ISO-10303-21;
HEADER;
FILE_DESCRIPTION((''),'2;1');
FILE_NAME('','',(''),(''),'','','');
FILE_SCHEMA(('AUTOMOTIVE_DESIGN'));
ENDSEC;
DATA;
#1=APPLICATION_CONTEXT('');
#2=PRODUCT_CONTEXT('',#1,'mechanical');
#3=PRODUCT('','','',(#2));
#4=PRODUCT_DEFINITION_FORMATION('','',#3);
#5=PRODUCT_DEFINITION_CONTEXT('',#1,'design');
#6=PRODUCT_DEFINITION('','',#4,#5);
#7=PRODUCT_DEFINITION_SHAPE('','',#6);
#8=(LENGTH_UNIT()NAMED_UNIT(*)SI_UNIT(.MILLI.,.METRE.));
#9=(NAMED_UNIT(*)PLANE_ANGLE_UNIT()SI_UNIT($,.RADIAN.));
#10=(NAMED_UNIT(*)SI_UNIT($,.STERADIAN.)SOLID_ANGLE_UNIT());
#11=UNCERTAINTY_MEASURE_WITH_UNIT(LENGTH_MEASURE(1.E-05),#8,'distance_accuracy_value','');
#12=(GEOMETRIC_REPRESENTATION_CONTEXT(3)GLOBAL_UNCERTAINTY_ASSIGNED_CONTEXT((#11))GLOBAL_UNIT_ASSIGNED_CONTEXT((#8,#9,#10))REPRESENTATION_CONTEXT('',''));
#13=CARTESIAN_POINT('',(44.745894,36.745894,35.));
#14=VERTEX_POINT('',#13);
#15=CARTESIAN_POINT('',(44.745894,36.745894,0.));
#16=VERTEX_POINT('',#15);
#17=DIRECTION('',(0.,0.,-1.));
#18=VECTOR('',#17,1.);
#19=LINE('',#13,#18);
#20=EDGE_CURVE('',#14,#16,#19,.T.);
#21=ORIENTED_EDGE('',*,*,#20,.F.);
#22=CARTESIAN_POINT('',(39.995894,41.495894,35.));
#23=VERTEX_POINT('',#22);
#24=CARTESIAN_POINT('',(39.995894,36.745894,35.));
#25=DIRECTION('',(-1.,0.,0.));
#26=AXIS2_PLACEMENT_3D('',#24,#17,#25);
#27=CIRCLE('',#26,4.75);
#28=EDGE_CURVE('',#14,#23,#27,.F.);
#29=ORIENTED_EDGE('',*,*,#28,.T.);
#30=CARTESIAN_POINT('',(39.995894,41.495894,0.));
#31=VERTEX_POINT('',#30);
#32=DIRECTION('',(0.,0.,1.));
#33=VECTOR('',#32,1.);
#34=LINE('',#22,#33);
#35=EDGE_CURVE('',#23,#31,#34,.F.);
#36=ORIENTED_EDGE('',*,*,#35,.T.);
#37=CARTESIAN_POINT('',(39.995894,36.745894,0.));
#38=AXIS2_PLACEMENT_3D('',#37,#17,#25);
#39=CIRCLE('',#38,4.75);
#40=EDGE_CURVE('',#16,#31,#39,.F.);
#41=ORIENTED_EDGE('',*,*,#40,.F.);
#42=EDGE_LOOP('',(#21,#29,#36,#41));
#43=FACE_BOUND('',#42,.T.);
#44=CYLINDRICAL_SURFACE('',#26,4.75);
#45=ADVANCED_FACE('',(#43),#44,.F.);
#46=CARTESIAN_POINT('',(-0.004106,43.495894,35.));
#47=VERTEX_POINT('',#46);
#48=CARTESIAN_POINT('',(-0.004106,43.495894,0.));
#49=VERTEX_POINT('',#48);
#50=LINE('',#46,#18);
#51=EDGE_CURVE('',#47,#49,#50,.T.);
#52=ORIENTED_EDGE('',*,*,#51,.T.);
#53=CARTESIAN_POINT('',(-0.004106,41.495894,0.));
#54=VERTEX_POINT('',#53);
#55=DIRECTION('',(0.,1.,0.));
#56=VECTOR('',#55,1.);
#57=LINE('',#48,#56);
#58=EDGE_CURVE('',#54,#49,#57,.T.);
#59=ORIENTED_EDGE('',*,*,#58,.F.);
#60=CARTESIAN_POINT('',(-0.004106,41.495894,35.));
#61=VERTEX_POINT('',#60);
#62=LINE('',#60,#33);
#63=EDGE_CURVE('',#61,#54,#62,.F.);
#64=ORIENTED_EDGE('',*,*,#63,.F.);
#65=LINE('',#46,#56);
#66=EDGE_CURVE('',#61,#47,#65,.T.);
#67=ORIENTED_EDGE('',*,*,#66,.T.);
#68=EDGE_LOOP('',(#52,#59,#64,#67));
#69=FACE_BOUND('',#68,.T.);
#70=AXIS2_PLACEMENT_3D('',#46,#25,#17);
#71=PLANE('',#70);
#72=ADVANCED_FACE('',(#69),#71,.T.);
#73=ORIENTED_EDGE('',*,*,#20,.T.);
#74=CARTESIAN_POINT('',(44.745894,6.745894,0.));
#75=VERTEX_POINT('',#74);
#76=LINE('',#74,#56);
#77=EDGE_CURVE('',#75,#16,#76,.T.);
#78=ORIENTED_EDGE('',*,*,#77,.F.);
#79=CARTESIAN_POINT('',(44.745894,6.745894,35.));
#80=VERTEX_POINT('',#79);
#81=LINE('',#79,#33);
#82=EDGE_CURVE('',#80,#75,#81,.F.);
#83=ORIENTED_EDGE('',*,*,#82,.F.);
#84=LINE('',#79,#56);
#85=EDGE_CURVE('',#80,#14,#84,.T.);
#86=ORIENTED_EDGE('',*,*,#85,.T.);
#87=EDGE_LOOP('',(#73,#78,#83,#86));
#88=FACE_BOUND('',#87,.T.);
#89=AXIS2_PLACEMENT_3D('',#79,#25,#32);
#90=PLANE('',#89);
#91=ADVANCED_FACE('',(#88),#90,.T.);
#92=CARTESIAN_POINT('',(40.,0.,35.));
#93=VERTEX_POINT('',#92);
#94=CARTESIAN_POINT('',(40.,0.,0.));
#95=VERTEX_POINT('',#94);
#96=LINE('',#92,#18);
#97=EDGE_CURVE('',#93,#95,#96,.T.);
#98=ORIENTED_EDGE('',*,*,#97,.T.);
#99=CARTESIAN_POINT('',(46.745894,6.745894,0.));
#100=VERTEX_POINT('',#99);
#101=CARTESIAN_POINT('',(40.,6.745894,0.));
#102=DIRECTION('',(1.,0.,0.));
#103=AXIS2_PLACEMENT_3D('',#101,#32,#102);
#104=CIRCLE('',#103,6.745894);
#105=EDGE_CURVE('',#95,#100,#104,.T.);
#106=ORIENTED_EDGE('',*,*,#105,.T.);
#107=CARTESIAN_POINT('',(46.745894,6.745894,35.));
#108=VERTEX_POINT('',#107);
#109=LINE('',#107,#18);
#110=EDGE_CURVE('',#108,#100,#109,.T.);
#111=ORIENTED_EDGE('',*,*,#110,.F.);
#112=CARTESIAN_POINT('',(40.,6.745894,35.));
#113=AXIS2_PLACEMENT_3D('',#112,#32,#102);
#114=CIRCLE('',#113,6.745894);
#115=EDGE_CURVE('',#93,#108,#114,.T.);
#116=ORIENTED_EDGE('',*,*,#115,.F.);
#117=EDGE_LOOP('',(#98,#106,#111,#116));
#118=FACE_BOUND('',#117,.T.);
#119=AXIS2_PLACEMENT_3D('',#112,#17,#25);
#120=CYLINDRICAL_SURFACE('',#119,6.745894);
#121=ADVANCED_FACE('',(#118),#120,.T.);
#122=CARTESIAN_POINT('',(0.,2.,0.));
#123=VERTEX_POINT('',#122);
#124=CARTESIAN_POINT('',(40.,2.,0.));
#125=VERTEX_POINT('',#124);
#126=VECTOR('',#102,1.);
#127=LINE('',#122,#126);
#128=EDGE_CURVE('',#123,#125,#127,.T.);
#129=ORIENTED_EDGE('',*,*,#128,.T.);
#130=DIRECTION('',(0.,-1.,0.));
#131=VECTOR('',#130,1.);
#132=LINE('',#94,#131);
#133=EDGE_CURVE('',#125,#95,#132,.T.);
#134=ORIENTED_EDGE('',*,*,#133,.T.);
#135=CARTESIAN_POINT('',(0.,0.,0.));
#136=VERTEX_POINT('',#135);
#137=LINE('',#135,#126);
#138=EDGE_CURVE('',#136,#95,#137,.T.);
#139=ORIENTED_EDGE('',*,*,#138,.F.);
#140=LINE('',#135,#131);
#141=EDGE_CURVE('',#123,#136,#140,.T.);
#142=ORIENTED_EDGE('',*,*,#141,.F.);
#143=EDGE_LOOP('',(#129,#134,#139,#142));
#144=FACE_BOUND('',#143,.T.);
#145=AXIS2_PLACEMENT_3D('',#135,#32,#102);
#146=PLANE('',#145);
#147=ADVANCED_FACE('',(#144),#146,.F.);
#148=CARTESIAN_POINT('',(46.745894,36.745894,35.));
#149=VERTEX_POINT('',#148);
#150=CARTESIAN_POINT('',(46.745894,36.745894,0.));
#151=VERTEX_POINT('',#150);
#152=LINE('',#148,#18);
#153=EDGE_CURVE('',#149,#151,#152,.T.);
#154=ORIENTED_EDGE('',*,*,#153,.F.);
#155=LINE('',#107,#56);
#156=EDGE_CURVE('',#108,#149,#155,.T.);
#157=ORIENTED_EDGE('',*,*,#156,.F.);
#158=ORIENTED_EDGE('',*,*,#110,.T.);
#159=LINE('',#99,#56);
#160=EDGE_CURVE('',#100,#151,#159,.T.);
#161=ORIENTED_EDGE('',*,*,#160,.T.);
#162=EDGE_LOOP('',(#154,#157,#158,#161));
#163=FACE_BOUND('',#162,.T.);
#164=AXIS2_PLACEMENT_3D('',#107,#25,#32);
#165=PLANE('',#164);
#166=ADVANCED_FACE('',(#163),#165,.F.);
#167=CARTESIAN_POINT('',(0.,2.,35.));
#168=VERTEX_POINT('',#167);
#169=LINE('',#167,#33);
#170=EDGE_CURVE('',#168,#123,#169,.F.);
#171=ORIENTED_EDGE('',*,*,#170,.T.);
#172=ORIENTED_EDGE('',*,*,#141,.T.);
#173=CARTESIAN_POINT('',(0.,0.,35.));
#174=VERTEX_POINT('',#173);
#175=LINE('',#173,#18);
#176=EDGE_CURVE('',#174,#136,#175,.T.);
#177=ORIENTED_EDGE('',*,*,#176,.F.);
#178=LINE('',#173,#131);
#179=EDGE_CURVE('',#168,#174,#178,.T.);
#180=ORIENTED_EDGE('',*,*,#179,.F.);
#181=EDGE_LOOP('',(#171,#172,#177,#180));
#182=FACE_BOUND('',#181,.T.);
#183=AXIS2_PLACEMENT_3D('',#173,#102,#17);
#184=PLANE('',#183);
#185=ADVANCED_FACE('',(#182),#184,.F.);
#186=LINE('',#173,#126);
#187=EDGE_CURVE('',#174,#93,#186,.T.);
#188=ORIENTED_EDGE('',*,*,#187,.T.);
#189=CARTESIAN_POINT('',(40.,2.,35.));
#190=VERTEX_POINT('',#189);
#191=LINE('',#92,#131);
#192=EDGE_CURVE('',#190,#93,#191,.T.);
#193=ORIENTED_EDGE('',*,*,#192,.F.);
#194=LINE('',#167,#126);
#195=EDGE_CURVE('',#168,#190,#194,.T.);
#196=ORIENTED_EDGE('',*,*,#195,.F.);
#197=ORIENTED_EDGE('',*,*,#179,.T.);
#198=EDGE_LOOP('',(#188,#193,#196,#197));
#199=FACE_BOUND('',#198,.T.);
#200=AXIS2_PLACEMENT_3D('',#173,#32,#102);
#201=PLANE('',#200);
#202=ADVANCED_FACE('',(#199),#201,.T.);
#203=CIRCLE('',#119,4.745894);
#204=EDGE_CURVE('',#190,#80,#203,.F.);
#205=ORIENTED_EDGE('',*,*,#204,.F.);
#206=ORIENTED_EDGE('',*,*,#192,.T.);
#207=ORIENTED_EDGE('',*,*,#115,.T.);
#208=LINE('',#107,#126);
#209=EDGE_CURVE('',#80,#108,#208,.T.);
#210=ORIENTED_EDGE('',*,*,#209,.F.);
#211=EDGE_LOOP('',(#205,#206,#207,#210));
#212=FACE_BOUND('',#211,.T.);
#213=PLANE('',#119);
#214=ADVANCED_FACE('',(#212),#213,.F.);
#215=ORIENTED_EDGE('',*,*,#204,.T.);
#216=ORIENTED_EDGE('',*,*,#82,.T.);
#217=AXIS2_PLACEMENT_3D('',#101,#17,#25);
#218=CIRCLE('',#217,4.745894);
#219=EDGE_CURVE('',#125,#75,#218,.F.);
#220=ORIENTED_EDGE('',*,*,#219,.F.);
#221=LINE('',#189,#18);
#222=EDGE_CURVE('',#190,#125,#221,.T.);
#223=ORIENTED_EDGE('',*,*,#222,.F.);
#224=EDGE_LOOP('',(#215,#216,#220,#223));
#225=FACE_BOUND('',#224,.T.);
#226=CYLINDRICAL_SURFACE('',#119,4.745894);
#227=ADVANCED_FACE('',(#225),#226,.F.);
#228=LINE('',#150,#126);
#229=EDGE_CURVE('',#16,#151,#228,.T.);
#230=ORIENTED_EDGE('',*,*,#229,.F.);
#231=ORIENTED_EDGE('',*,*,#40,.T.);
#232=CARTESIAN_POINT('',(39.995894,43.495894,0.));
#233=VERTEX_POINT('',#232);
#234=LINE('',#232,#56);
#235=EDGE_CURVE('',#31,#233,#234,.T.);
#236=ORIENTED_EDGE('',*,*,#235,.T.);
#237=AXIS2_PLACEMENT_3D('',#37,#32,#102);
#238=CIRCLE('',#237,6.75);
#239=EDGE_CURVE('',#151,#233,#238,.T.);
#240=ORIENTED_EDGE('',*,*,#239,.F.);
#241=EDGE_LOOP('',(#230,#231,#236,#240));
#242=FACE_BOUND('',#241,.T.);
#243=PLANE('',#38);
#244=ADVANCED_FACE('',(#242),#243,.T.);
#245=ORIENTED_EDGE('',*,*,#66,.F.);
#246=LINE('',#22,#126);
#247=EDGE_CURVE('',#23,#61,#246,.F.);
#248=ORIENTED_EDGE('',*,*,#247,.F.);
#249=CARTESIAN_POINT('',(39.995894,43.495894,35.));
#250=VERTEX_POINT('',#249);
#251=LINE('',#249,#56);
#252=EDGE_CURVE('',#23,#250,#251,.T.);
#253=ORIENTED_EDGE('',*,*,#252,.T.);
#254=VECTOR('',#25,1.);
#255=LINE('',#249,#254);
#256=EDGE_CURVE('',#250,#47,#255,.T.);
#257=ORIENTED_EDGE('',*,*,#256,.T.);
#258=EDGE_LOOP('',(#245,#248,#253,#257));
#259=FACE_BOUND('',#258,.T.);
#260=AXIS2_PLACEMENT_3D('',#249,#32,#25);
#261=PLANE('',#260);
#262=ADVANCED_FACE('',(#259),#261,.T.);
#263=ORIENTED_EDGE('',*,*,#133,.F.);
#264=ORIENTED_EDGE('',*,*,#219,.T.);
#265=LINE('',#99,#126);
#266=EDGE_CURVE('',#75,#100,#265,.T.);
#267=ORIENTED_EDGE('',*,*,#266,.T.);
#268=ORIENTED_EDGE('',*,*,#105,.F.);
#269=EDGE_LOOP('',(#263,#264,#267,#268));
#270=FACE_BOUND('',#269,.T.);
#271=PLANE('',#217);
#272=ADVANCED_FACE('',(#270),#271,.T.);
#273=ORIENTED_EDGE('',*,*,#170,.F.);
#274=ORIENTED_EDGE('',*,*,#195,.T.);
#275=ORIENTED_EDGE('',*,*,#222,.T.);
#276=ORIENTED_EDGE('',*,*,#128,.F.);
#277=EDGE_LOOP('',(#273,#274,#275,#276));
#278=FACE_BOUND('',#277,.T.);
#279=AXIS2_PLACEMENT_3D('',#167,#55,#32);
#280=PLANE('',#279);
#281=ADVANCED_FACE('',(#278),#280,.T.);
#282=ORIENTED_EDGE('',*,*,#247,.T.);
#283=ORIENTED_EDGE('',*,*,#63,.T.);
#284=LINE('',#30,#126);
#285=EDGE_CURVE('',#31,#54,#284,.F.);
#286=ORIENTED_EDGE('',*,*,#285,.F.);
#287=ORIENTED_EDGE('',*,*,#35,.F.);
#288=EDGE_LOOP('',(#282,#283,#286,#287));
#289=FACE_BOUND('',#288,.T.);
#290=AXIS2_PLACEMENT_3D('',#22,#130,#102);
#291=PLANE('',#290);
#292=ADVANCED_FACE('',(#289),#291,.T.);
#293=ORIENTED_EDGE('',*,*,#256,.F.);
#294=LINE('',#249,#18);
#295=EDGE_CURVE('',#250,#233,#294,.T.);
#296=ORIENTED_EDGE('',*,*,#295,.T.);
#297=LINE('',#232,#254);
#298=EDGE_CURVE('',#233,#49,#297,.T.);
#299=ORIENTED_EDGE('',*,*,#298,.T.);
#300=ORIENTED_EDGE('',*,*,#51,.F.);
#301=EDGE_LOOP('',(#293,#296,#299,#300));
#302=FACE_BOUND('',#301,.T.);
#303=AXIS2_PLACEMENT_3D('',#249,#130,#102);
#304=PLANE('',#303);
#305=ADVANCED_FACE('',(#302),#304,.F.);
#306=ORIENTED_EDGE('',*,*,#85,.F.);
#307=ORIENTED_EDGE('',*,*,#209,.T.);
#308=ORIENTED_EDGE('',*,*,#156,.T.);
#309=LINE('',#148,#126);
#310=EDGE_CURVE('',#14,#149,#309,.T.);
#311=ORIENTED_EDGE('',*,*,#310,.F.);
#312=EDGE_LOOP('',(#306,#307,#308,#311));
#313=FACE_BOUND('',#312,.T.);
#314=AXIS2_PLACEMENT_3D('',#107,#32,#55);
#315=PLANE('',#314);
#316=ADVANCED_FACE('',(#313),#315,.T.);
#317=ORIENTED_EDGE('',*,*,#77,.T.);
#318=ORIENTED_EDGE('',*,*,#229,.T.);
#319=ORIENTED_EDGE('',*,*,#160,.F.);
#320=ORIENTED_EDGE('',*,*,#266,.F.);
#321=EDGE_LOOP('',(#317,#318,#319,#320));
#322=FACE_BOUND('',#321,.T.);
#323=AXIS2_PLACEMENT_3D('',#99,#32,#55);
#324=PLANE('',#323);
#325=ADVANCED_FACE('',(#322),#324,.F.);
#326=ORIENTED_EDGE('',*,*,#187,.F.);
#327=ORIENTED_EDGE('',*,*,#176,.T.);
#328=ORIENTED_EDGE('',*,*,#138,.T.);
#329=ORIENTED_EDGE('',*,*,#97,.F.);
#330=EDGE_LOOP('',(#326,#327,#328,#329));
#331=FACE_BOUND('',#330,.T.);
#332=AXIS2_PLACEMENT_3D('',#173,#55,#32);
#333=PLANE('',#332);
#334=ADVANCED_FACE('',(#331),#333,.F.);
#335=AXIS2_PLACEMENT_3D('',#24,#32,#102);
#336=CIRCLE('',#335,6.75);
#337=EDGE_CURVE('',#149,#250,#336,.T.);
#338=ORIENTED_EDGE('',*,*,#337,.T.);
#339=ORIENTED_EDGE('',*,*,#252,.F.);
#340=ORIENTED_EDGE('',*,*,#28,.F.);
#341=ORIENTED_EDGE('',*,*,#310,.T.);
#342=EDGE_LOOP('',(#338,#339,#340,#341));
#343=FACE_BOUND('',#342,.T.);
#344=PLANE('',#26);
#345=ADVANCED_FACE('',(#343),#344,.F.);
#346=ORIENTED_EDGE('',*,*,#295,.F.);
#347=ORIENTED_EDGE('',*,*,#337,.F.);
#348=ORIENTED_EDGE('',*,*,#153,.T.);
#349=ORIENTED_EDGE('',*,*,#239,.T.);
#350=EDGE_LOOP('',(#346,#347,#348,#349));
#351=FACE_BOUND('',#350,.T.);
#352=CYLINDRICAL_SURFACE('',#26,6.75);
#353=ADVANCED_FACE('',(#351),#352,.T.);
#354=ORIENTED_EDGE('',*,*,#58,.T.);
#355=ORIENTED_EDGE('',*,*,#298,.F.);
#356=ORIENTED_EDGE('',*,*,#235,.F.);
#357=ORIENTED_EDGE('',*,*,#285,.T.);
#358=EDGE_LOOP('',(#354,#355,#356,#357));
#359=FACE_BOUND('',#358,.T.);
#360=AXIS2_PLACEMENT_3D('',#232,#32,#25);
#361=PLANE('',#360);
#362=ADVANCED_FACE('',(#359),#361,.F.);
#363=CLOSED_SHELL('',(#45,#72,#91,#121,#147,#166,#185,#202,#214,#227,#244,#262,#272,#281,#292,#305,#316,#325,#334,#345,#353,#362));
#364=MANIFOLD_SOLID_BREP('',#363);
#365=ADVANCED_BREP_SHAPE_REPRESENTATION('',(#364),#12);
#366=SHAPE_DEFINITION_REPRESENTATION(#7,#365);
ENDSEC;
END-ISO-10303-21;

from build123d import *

# Parameters (mm, degrees)
BOSS_EXTRUDE1_DEPTH  = 35
CONVERT_SOLID1_DEPTH = 35


# Read off the part's stored shape, not the designer's step: Convert-Solid1
with BuildPart() as part:
    # Sketch1 → Boss-Extrude1 (new body)
    with BuildSketch(Plane.XY):
        with BuildLine():
            Line((0, 0), (40, 0))
            ThreePointArc((40, 0), (44.770067359, 1.975826594), (46.745893953, 6.745893953))
            Line((46.745893953, 6.745893953), (46.745893953, 36.745893953))
            ThreePointArc((46.745893953, 36.745893953), (44.768864726, 41.518864726), (39.995893953, 43.495893953))
            Line((39.995893953, 43.495893953), (-0.004106047, 43.495893953))
            Line((-0.004106047, 43.495893953), (-0.004106047, 41.995893953))
            Line((-0.004106047, 41.995893953), (39.995893953, 41.995893953))
            ThreePointArc((39.995893953, 41.995893953), (43.708204554, 40.458204554), (45.245893953, 36.745893953))
            Line((45.245893953, 36.745893953), (45.245893953, 6.75))
            ThreePointArc((45.245893953, 6.75), (43.708204554, 3.037689399), (39.995893953, 1.5))
            Line((39.995893953, 1.5), (0, 1.5))
            Line((0, 1.5), (0, 0))
        make_face()
    extrude(amount=BOSS_EXTRUDE1_DEPTH)

    # Convert-Solid1 outline → Convert-Solid1 (add)
    with BuildSketch(Plane.XY):
        with BuildLine():
            Line((39.995893953, 41.995893953), (-0.004106047, 41.995893953))
            Line((-0.004106047, 41.995893953), (-0.004106047, 41.495893953))
            Line((-0.004106047, 41.495893953), (39.995893953, 41.495893953))
            ThreePointArc((39.995893953, 41.495893953), (43.354651163, 40.104651163), (44.745893953, 36.745893953))
            Line((44.745893953, 36.745893953), (44.745893953, 6.745893953))
            ThreePointArc((44.745893953, 6.745893953), (43.355853797, 3.390040156), (40, 2))
            Line((40, 2), (0, 2))
            Line((0, 2), (0, 1.5))
            Line((0, 1.5), (39.995893953, 1.5))
            ThreePointArc((39.995893953, 1.5), (43.708204554, 3.037689399), (45.245893953, 6.75))
            Line((45.245893953, 6.75), (45.245893953, 36.745893953))
            ThreePointArc((45.245893953, 36.745893953), (43.708204554, 40.458204554), (39.995893953, 41.995893953))
        make_face()
    extrude(amount=CONVERT_SOLID1_DEPTH)


solid = part.part
